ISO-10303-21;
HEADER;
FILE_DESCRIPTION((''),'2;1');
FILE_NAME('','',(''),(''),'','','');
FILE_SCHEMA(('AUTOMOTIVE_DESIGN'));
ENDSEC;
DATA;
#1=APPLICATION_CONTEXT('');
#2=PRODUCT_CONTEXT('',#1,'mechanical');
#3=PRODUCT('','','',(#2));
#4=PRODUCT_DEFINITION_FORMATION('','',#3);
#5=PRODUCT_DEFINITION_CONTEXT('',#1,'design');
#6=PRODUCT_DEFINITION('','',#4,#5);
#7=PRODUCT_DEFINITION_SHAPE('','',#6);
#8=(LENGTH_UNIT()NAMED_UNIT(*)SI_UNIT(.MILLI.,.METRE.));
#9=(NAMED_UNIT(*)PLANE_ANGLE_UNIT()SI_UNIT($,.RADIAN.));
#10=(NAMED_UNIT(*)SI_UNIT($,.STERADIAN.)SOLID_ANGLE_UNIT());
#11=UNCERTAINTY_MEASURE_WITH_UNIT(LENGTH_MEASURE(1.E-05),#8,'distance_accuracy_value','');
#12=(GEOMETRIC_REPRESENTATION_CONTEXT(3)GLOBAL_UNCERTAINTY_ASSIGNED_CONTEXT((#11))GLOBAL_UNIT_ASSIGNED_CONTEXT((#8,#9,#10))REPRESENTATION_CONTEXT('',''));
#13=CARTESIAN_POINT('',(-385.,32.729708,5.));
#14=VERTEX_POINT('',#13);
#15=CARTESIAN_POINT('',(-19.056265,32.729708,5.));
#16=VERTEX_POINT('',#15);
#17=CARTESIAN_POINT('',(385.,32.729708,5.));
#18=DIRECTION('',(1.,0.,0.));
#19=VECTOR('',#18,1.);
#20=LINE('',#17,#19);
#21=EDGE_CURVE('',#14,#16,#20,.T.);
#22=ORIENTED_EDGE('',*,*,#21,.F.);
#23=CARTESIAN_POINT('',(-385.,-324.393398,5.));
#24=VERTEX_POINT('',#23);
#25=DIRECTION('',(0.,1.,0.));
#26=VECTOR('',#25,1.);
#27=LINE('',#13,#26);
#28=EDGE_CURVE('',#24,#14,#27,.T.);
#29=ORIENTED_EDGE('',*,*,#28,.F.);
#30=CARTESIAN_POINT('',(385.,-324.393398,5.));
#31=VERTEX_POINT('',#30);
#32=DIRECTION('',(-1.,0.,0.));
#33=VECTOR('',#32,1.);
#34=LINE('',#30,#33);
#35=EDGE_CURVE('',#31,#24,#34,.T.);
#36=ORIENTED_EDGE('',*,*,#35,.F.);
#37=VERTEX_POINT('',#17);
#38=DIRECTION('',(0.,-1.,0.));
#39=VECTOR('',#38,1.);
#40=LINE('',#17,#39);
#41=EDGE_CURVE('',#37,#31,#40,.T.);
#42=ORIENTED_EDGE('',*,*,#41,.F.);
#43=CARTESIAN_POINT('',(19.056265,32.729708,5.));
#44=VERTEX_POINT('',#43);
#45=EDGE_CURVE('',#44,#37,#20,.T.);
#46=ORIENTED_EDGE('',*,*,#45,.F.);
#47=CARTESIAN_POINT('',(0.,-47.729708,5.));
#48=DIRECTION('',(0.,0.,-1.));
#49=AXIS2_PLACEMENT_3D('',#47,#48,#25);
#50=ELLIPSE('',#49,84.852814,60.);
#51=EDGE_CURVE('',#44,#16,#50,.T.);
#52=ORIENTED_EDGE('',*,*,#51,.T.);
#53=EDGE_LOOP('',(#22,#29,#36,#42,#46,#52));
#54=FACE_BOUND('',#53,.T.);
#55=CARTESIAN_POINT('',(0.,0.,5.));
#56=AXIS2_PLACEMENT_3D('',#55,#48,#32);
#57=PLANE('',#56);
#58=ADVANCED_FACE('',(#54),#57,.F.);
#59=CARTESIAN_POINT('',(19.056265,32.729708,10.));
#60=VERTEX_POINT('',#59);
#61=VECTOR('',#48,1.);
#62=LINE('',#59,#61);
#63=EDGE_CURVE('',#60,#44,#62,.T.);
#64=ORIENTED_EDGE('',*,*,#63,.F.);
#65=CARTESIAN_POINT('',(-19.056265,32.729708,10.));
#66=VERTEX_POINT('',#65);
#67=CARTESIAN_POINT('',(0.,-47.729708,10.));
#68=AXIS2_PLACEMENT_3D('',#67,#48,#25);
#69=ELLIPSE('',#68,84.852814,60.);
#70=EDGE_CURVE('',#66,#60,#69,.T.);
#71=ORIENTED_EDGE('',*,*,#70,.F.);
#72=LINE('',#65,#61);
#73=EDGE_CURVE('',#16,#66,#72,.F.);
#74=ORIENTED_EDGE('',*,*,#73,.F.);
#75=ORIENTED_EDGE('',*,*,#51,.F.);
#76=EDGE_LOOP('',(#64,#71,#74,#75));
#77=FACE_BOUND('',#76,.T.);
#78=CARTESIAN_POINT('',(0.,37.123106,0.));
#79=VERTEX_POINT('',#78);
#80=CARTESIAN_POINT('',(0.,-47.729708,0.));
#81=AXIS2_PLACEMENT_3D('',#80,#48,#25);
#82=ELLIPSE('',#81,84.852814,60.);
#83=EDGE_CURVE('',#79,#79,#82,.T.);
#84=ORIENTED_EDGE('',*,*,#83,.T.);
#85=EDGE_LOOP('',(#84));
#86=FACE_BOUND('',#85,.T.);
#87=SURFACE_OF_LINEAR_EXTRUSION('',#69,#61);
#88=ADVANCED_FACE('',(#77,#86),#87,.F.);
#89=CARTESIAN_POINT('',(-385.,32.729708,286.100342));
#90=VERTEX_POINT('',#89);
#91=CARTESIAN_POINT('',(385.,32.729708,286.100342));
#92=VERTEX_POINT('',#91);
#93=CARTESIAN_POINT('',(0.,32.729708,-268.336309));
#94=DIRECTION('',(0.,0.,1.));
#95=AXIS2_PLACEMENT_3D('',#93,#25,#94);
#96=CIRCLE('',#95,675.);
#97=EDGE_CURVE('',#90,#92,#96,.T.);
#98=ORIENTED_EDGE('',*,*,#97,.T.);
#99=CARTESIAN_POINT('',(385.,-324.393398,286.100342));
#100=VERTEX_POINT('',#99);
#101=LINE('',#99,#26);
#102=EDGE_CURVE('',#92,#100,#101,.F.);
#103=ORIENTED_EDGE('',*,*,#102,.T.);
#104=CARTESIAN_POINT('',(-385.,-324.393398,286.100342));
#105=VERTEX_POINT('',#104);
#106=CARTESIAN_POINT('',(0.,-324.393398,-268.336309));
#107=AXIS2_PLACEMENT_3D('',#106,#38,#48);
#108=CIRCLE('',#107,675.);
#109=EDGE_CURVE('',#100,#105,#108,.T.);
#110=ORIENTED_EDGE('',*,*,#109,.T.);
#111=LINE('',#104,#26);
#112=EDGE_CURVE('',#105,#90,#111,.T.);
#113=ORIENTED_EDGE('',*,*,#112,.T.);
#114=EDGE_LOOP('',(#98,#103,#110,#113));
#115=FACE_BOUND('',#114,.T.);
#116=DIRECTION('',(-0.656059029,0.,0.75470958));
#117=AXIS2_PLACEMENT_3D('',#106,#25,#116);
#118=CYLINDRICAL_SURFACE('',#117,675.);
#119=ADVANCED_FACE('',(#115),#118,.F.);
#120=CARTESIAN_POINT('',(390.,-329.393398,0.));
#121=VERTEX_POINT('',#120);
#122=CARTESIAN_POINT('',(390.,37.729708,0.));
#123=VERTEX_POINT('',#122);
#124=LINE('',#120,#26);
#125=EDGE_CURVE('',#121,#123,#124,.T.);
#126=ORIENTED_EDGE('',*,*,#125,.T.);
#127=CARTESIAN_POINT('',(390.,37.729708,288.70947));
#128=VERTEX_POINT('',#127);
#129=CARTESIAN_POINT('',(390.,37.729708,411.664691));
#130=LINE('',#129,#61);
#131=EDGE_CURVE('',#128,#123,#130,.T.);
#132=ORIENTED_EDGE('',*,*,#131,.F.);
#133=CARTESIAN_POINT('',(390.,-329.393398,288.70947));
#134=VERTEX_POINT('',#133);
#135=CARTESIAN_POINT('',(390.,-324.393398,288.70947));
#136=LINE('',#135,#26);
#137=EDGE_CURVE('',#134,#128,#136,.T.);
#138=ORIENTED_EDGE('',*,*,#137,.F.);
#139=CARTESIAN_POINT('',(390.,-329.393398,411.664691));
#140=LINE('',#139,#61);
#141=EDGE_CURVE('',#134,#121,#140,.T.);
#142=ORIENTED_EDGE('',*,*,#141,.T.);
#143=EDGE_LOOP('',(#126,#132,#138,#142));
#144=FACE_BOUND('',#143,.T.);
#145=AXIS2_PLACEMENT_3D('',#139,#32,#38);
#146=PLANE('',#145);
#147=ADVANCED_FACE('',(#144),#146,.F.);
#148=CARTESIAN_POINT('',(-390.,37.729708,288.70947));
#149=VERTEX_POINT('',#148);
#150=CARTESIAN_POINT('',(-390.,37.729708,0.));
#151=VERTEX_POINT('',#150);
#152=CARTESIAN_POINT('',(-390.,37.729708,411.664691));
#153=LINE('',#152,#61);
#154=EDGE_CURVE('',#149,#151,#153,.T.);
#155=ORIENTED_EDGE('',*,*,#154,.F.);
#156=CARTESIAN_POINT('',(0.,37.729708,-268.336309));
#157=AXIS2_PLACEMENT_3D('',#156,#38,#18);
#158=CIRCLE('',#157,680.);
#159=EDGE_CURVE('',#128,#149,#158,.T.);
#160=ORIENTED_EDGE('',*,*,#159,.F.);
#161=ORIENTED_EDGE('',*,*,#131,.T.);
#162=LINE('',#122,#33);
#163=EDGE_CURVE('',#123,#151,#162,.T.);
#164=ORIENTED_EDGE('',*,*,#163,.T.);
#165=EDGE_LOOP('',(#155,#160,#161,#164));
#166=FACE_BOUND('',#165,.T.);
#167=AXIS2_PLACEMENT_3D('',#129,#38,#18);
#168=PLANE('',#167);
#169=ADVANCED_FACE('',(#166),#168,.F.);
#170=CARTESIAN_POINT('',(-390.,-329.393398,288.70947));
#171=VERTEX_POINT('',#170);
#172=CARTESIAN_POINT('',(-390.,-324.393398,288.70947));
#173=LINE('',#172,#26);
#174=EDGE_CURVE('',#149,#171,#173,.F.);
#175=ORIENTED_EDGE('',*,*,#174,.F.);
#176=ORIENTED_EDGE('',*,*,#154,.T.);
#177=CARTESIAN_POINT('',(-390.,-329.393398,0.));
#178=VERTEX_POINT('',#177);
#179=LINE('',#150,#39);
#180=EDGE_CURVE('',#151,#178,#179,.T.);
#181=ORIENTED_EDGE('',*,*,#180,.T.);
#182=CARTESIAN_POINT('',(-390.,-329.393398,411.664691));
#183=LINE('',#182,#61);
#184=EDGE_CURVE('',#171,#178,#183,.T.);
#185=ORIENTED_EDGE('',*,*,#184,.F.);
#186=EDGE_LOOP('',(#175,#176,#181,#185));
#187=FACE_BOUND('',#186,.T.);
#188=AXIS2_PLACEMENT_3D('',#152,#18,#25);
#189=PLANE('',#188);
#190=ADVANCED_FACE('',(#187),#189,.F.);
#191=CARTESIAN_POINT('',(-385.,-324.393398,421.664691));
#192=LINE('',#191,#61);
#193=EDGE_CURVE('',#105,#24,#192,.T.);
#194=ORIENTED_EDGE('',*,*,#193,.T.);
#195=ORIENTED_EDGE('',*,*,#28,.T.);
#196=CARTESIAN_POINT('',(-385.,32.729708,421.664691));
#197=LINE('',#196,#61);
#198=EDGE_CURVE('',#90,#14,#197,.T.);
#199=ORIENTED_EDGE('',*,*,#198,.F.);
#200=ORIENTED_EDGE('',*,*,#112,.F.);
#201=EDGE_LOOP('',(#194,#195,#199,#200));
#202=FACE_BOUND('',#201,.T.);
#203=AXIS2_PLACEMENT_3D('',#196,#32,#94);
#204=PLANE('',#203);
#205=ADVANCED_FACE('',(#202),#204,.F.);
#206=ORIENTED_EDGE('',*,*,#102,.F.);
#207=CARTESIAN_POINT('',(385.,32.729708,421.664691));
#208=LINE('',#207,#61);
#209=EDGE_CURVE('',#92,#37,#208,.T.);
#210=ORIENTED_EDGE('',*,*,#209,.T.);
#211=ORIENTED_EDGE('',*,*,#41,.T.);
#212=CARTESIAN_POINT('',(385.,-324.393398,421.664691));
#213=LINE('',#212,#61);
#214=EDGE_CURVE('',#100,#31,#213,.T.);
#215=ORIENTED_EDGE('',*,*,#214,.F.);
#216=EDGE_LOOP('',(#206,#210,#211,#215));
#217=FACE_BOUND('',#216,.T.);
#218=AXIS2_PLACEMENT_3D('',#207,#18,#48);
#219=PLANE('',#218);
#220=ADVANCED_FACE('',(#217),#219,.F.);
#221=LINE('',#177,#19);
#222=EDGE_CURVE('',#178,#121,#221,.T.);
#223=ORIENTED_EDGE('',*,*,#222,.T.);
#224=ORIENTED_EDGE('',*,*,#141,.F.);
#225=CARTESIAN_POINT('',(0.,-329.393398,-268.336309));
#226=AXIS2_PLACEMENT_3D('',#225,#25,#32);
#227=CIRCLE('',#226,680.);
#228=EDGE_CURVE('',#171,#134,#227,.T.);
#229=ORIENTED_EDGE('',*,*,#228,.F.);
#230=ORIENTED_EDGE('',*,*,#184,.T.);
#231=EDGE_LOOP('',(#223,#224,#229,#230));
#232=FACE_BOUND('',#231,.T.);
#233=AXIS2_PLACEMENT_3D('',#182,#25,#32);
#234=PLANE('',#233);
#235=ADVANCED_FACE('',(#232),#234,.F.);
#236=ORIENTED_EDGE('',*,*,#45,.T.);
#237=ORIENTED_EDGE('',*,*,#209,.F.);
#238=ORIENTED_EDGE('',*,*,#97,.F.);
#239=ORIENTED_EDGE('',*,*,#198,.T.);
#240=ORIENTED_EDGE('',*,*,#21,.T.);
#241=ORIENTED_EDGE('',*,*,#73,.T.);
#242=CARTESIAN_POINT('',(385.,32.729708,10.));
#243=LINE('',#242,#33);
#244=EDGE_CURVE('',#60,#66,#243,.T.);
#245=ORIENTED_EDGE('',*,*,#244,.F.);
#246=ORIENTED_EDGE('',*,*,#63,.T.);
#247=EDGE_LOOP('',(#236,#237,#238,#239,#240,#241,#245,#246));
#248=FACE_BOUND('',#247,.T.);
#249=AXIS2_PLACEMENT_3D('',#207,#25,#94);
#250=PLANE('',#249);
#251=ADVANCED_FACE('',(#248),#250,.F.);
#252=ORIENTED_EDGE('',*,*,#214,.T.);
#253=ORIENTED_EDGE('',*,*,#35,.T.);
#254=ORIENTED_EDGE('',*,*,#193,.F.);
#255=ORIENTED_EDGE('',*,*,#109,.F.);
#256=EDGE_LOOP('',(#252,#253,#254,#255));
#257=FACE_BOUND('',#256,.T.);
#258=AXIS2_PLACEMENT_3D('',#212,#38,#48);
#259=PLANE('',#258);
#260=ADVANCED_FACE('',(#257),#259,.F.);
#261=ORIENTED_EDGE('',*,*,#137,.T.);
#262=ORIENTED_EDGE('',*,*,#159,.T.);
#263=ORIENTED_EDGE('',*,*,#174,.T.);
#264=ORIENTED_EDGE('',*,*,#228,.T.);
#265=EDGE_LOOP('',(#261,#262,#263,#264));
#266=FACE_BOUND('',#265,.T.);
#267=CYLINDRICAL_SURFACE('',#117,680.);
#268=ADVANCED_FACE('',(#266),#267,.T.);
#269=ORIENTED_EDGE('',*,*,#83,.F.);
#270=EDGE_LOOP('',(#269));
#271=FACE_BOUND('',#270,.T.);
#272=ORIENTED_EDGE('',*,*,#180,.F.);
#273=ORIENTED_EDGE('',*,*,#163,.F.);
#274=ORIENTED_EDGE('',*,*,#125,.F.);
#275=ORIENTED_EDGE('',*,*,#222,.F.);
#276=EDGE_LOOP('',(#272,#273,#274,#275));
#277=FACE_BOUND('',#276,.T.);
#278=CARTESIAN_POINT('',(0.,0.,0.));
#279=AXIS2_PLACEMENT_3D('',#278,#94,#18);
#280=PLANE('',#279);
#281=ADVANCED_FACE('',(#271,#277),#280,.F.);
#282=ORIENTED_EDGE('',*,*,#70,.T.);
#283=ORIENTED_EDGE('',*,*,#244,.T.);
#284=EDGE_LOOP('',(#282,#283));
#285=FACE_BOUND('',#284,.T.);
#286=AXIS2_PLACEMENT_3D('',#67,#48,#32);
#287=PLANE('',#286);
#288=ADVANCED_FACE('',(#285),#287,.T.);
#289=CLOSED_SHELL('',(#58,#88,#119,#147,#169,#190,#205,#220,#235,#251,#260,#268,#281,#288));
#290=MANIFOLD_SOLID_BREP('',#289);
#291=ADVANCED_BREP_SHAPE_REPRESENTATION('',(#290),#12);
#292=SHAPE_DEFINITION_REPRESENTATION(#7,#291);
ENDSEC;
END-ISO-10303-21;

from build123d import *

# Parameters (mm, degrees)
EXTRUDE_START            = -329.393398282
EXTRUDE_1_DEPTH          = 367.123106012
CUT_EXTRUDE_2_REACH      = 654.668
CUT_EXTRUDE_2_END_RADIUS = 675
SKETCH_4_W               = 770
SKETCH_4_H               = 357.123106012
SKETCH_5_RX              = 84.852813742
SKETCH_5_RY              = 60
CUT_EXTRUDE_3_DEPTH      = 10


# Read off the part's stored shape, not the designer's step: 凸台-拉伸1
with BuildPart() as part:
    # 凸台-拉伸1 outline → 凸台-拉伸1 (new body)
    with BuildSketch(Plane(origin=(0, 0, 0), x_dir=(1, 0, 0), z_dir=(0, 1, 0)).offset(EXTRUDE_START)):
        with BuildLine():
            Line((390, -288.70946964), (390, 0))
            Line((390, 0), (-390, 0))
            Line((-390, 0), (-390, -288.70946964))
            ThreePointArc((-390, -288.70946964), (0, -411.663690552), (390, -288.70946964))
        make_face()
    extrude(amount=EXTRUDE_1_DEPTH)

    # 切除-拉伸2: up to this cylinder (the profile starts inside it)
    cut_extrude_2_end = Plane(origin=(0, -145.831845, -268.336309448), z_dir=(0, 1, 0)) * Cylinder(CUT_EXTRUDE_2_END_RADIUS, 2660.336, mode=Mode.PRIVATE)
    # 草图4 → 切除-拉伸2 (cut, up to the surface)
    with BuildSketch(Plane(origin=(0, 0, 5), x_dir=(-1, 0, 0), z_dir=(0, 0, -1)), mode=Mode.PRIVATE) as cut_extrude_2_sk1:
        with Locations((0, -145.831845276)):
            Rectangle(SKETCH_4_W, SKETCH_4_H)
    cut_extrude_2_tool1 = extrude(cut_extrude_2_sk1.sketch, amount=-CUT_EXTRUDE_2_REACH, mode=Mode.PRIVATE) & cut_extrude_2_end
    add(cut_extrude_2_tool1.solids().sort_by_distance((0, -145.831845, 5))[0], mode=Mode.SUBTRACT)

    # 草图5 → 切除-拉伸3 (cut)
    with BuildSketch(Plane(origin=(0, 0, 0), x_dir=(-1, 0, 0), z_dir=(0, 0, -1))):
        with Locations(Location((0, -47.72970773), (0, 0, 90))):
            Ellipse(SKETCH_5_RX, SKETCH_5_RY)
    extrude(amount=-CUT_EXTRUDE_3_DEPTH, mode=Mode.SUBTRACT)


solid = part.part
